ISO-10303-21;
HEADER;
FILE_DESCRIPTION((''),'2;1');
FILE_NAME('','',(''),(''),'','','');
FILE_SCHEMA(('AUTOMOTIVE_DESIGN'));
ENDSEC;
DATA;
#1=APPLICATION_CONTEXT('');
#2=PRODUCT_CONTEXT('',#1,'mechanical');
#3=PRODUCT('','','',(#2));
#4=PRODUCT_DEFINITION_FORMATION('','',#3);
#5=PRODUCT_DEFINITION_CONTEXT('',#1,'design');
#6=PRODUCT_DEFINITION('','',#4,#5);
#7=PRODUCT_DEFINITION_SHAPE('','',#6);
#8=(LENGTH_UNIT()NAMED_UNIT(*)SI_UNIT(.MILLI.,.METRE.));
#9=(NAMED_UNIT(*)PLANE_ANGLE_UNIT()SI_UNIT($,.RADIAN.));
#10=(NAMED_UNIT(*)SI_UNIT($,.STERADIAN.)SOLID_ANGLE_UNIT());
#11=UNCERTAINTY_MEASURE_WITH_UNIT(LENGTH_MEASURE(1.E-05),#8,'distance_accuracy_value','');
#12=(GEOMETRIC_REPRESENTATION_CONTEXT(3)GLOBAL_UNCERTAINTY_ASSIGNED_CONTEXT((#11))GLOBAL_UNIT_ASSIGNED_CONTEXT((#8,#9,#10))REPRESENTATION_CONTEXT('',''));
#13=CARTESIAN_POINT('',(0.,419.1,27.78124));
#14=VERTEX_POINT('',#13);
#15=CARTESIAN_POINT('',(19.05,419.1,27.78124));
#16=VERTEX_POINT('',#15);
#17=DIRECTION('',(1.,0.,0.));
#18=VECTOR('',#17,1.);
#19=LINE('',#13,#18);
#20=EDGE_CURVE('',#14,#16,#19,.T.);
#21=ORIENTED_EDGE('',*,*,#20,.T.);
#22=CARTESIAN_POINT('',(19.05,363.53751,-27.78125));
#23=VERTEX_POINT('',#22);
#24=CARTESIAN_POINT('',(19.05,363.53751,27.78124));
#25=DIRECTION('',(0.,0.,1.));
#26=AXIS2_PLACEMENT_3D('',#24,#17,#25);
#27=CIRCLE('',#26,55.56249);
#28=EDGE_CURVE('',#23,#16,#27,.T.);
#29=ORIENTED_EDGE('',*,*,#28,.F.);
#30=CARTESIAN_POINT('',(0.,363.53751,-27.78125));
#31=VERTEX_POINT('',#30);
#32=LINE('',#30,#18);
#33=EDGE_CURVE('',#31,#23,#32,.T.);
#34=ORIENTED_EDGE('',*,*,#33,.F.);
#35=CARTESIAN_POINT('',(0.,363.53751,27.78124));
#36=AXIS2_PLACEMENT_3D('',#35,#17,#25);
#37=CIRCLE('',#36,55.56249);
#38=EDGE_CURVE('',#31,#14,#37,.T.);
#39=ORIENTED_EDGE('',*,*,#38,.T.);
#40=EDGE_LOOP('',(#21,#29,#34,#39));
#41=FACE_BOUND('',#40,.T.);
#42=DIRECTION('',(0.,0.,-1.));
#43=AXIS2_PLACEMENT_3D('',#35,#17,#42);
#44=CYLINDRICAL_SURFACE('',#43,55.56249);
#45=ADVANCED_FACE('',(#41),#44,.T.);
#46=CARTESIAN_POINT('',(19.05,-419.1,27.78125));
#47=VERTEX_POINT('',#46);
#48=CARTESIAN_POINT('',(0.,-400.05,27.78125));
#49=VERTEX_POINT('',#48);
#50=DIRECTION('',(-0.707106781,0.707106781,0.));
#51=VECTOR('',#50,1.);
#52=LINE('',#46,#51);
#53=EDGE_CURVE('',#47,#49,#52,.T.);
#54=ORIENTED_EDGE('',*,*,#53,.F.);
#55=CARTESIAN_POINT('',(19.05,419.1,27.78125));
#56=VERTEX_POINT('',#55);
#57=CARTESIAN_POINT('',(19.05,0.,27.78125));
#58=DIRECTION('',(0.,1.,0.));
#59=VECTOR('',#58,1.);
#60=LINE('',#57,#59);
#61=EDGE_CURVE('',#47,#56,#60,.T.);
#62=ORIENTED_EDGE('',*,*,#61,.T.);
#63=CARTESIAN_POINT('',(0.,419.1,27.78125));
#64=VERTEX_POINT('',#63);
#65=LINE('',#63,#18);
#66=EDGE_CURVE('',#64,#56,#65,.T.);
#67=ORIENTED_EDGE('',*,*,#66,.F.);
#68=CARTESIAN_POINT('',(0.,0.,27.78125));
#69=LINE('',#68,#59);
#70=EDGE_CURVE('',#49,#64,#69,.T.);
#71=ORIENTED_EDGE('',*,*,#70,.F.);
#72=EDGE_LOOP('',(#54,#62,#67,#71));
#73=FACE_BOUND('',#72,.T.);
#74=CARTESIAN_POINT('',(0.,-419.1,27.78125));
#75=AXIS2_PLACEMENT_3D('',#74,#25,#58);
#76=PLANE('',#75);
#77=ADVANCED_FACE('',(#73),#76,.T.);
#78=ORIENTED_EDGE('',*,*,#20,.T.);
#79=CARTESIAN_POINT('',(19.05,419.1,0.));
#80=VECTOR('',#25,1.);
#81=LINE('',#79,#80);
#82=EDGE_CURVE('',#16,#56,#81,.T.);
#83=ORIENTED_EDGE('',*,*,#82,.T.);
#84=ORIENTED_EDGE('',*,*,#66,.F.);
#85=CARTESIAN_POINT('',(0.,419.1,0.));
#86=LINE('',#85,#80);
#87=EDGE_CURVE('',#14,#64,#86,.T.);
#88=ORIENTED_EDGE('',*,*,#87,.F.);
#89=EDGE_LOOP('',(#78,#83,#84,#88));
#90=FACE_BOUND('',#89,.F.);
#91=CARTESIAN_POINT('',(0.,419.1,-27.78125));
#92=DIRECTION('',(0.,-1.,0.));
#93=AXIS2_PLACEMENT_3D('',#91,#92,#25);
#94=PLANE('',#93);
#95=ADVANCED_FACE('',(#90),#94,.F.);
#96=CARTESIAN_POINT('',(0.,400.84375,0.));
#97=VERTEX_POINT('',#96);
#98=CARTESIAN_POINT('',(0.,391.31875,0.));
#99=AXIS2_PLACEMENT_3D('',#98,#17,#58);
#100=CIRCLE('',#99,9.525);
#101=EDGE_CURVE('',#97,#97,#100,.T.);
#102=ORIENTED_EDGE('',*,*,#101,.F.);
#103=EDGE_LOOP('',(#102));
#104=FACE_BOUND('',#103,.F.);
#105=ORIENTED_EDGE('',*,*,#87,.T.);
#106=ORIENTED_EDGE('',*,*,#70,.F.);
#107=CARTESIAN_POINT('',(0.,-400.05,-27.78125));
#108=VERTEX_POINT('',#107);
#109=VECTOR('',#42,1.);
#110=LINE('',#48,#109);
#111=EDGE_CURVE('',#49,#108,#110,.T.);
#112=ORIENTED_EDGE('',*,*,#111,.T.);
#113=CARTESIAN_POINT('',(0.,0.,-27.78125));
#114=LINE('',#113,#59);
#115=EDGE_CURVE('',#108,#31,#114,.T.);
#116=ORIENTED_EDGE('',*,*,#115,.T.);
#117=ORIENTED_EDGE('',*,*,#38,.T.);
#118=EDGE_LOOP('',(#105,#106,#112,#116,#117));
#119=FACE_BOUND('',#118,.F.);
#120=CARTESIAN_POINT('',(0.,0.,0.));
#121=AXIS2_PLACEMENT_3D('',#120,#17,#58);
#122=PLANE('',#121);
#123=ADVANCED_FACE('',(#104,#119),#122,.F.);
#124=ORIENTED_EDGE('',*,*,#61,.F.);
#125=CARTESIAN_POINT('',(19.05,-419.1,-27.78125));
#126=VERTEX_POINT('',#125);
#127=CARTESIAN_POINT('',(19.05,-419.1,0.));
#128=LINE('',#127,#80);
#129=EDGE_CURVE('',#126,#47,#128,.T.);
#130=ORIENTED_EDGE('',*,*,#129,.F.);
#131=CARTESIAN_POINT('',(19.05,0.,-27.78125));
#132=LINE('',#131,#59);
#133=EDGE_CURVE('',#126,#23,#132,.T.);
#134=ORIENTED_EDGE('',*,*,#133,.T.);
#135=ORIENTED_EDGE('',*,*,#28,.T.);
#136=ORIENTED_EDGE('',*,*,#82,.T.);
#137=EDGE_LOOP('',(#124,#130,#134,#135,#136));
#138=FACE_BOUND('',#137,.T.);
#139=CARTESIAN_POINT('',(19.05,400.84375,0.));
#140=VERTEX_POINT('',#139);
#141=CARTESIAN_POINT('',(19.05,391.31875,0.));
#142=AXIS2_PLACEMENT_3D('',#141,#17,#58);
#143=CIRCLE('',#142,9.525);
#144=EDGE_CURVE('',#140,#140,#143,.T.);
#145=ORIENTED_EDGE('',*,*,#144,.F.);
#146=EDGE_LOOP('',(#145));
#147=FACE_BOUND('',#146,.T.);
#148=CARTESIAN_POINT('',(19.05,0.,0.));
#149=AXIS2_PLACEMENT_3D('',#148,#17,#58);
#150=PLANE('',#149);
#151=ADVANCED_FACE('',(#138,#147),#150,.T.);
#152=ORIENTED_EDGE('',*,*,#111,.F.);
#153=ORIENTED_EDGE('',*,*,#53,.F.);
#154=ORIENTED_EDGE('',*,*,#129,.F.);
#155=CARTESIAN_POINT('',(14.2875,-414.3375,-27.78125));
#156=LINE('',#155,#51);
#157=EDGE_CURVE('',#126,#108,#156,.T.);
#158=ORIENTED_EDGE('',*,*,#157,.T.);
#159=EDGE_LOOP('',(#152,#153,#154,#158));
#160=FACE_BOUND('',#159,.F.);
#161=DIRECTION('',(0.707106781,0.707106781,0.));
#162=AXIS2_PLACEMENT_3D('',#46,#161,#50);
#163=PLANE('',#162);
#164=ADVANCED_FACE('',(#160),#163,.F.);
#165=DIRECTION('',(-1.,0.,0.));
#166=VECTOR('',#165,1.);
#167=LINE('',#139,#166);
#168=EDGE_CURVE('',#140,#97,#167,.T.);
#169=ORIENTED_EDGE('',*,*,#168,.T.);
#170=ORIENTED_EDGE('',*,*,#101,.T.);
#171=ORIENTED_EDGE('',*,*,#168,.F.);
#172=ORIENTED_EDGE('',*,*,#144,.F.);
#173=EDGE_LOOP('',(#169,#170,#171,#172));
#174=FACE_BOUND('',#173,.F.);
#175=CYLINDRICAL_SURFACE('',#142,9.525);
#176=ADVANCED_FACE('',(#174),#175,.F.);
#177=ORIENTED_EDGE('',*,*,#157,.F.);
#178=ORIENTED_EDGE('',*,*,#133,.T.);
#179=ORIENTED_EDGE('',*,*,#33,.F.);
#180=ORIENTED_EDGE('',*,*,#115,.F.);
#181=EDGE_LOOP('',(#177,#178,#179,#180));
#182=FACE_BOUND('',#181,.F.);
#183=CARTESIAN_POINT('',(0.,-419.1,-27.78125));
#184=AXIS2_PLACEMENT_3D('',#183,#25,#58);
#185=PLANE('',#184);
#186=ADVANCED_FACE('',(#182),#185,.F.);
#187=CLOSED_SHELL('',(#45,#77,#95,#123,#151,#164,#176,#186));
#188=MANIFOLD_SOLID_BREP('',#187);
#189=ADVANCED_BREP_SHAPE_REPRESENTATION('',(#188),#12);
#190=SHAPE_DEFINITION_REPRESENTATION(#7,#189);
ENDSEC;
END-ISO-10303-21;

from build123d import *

# Parameters (mm, degrees)
F0_W     = 838.2
F0_H     = 55.5625
F1_DEPTH = 19.05
F2_R     = 55.56249
F4_DEPTH = 55.5635
F5_R     = 9.525
F6_DEPTH = 25.4


# Not quite as in the source:
# - a fillet or chamfer is up to 0.001 mm smaller than in the source, because OpenCascade refuses the exact size


with BuildPart() as f1:
    # F0 (on Right) → F1 (new body)
    with BuildSketch(Plane.YZ):
        Rectangle(F0_W, F0_H)
    extrude(amount=F1_DEPTH)

    # F2 (radius 55.5625 in the source; OpenCascade refuses exactly that, so slightly less here)
    f2_edges = [f1.edges().sort_by_distance(p)[0] for p in [
        (9.525, 419.1, -27.78125),
    ]]
    fillet(f2_edges, radius=F2_R)

    # F3 (on face) → F4 (cut, through all)
    with BuildSketch(Plane.XY.offset(27.78125)):
        Polygon((0, -419.1), (19.05, -419.1), (0, -400.05), align=None)
    extrude(amount=-F4_DEPTH, mode=Mode.SUBTRACT)

    # F5 (on face) → F6 (cut)
    with BuildSketch(Plane.YZ.offset(19.05)):
        with Locations((391.31875, 0)):
            Circle(F5_R)
    extrude(amount=-F6_DEPTH, mode=Mode.SUBTRACT)


solid = f1.part
